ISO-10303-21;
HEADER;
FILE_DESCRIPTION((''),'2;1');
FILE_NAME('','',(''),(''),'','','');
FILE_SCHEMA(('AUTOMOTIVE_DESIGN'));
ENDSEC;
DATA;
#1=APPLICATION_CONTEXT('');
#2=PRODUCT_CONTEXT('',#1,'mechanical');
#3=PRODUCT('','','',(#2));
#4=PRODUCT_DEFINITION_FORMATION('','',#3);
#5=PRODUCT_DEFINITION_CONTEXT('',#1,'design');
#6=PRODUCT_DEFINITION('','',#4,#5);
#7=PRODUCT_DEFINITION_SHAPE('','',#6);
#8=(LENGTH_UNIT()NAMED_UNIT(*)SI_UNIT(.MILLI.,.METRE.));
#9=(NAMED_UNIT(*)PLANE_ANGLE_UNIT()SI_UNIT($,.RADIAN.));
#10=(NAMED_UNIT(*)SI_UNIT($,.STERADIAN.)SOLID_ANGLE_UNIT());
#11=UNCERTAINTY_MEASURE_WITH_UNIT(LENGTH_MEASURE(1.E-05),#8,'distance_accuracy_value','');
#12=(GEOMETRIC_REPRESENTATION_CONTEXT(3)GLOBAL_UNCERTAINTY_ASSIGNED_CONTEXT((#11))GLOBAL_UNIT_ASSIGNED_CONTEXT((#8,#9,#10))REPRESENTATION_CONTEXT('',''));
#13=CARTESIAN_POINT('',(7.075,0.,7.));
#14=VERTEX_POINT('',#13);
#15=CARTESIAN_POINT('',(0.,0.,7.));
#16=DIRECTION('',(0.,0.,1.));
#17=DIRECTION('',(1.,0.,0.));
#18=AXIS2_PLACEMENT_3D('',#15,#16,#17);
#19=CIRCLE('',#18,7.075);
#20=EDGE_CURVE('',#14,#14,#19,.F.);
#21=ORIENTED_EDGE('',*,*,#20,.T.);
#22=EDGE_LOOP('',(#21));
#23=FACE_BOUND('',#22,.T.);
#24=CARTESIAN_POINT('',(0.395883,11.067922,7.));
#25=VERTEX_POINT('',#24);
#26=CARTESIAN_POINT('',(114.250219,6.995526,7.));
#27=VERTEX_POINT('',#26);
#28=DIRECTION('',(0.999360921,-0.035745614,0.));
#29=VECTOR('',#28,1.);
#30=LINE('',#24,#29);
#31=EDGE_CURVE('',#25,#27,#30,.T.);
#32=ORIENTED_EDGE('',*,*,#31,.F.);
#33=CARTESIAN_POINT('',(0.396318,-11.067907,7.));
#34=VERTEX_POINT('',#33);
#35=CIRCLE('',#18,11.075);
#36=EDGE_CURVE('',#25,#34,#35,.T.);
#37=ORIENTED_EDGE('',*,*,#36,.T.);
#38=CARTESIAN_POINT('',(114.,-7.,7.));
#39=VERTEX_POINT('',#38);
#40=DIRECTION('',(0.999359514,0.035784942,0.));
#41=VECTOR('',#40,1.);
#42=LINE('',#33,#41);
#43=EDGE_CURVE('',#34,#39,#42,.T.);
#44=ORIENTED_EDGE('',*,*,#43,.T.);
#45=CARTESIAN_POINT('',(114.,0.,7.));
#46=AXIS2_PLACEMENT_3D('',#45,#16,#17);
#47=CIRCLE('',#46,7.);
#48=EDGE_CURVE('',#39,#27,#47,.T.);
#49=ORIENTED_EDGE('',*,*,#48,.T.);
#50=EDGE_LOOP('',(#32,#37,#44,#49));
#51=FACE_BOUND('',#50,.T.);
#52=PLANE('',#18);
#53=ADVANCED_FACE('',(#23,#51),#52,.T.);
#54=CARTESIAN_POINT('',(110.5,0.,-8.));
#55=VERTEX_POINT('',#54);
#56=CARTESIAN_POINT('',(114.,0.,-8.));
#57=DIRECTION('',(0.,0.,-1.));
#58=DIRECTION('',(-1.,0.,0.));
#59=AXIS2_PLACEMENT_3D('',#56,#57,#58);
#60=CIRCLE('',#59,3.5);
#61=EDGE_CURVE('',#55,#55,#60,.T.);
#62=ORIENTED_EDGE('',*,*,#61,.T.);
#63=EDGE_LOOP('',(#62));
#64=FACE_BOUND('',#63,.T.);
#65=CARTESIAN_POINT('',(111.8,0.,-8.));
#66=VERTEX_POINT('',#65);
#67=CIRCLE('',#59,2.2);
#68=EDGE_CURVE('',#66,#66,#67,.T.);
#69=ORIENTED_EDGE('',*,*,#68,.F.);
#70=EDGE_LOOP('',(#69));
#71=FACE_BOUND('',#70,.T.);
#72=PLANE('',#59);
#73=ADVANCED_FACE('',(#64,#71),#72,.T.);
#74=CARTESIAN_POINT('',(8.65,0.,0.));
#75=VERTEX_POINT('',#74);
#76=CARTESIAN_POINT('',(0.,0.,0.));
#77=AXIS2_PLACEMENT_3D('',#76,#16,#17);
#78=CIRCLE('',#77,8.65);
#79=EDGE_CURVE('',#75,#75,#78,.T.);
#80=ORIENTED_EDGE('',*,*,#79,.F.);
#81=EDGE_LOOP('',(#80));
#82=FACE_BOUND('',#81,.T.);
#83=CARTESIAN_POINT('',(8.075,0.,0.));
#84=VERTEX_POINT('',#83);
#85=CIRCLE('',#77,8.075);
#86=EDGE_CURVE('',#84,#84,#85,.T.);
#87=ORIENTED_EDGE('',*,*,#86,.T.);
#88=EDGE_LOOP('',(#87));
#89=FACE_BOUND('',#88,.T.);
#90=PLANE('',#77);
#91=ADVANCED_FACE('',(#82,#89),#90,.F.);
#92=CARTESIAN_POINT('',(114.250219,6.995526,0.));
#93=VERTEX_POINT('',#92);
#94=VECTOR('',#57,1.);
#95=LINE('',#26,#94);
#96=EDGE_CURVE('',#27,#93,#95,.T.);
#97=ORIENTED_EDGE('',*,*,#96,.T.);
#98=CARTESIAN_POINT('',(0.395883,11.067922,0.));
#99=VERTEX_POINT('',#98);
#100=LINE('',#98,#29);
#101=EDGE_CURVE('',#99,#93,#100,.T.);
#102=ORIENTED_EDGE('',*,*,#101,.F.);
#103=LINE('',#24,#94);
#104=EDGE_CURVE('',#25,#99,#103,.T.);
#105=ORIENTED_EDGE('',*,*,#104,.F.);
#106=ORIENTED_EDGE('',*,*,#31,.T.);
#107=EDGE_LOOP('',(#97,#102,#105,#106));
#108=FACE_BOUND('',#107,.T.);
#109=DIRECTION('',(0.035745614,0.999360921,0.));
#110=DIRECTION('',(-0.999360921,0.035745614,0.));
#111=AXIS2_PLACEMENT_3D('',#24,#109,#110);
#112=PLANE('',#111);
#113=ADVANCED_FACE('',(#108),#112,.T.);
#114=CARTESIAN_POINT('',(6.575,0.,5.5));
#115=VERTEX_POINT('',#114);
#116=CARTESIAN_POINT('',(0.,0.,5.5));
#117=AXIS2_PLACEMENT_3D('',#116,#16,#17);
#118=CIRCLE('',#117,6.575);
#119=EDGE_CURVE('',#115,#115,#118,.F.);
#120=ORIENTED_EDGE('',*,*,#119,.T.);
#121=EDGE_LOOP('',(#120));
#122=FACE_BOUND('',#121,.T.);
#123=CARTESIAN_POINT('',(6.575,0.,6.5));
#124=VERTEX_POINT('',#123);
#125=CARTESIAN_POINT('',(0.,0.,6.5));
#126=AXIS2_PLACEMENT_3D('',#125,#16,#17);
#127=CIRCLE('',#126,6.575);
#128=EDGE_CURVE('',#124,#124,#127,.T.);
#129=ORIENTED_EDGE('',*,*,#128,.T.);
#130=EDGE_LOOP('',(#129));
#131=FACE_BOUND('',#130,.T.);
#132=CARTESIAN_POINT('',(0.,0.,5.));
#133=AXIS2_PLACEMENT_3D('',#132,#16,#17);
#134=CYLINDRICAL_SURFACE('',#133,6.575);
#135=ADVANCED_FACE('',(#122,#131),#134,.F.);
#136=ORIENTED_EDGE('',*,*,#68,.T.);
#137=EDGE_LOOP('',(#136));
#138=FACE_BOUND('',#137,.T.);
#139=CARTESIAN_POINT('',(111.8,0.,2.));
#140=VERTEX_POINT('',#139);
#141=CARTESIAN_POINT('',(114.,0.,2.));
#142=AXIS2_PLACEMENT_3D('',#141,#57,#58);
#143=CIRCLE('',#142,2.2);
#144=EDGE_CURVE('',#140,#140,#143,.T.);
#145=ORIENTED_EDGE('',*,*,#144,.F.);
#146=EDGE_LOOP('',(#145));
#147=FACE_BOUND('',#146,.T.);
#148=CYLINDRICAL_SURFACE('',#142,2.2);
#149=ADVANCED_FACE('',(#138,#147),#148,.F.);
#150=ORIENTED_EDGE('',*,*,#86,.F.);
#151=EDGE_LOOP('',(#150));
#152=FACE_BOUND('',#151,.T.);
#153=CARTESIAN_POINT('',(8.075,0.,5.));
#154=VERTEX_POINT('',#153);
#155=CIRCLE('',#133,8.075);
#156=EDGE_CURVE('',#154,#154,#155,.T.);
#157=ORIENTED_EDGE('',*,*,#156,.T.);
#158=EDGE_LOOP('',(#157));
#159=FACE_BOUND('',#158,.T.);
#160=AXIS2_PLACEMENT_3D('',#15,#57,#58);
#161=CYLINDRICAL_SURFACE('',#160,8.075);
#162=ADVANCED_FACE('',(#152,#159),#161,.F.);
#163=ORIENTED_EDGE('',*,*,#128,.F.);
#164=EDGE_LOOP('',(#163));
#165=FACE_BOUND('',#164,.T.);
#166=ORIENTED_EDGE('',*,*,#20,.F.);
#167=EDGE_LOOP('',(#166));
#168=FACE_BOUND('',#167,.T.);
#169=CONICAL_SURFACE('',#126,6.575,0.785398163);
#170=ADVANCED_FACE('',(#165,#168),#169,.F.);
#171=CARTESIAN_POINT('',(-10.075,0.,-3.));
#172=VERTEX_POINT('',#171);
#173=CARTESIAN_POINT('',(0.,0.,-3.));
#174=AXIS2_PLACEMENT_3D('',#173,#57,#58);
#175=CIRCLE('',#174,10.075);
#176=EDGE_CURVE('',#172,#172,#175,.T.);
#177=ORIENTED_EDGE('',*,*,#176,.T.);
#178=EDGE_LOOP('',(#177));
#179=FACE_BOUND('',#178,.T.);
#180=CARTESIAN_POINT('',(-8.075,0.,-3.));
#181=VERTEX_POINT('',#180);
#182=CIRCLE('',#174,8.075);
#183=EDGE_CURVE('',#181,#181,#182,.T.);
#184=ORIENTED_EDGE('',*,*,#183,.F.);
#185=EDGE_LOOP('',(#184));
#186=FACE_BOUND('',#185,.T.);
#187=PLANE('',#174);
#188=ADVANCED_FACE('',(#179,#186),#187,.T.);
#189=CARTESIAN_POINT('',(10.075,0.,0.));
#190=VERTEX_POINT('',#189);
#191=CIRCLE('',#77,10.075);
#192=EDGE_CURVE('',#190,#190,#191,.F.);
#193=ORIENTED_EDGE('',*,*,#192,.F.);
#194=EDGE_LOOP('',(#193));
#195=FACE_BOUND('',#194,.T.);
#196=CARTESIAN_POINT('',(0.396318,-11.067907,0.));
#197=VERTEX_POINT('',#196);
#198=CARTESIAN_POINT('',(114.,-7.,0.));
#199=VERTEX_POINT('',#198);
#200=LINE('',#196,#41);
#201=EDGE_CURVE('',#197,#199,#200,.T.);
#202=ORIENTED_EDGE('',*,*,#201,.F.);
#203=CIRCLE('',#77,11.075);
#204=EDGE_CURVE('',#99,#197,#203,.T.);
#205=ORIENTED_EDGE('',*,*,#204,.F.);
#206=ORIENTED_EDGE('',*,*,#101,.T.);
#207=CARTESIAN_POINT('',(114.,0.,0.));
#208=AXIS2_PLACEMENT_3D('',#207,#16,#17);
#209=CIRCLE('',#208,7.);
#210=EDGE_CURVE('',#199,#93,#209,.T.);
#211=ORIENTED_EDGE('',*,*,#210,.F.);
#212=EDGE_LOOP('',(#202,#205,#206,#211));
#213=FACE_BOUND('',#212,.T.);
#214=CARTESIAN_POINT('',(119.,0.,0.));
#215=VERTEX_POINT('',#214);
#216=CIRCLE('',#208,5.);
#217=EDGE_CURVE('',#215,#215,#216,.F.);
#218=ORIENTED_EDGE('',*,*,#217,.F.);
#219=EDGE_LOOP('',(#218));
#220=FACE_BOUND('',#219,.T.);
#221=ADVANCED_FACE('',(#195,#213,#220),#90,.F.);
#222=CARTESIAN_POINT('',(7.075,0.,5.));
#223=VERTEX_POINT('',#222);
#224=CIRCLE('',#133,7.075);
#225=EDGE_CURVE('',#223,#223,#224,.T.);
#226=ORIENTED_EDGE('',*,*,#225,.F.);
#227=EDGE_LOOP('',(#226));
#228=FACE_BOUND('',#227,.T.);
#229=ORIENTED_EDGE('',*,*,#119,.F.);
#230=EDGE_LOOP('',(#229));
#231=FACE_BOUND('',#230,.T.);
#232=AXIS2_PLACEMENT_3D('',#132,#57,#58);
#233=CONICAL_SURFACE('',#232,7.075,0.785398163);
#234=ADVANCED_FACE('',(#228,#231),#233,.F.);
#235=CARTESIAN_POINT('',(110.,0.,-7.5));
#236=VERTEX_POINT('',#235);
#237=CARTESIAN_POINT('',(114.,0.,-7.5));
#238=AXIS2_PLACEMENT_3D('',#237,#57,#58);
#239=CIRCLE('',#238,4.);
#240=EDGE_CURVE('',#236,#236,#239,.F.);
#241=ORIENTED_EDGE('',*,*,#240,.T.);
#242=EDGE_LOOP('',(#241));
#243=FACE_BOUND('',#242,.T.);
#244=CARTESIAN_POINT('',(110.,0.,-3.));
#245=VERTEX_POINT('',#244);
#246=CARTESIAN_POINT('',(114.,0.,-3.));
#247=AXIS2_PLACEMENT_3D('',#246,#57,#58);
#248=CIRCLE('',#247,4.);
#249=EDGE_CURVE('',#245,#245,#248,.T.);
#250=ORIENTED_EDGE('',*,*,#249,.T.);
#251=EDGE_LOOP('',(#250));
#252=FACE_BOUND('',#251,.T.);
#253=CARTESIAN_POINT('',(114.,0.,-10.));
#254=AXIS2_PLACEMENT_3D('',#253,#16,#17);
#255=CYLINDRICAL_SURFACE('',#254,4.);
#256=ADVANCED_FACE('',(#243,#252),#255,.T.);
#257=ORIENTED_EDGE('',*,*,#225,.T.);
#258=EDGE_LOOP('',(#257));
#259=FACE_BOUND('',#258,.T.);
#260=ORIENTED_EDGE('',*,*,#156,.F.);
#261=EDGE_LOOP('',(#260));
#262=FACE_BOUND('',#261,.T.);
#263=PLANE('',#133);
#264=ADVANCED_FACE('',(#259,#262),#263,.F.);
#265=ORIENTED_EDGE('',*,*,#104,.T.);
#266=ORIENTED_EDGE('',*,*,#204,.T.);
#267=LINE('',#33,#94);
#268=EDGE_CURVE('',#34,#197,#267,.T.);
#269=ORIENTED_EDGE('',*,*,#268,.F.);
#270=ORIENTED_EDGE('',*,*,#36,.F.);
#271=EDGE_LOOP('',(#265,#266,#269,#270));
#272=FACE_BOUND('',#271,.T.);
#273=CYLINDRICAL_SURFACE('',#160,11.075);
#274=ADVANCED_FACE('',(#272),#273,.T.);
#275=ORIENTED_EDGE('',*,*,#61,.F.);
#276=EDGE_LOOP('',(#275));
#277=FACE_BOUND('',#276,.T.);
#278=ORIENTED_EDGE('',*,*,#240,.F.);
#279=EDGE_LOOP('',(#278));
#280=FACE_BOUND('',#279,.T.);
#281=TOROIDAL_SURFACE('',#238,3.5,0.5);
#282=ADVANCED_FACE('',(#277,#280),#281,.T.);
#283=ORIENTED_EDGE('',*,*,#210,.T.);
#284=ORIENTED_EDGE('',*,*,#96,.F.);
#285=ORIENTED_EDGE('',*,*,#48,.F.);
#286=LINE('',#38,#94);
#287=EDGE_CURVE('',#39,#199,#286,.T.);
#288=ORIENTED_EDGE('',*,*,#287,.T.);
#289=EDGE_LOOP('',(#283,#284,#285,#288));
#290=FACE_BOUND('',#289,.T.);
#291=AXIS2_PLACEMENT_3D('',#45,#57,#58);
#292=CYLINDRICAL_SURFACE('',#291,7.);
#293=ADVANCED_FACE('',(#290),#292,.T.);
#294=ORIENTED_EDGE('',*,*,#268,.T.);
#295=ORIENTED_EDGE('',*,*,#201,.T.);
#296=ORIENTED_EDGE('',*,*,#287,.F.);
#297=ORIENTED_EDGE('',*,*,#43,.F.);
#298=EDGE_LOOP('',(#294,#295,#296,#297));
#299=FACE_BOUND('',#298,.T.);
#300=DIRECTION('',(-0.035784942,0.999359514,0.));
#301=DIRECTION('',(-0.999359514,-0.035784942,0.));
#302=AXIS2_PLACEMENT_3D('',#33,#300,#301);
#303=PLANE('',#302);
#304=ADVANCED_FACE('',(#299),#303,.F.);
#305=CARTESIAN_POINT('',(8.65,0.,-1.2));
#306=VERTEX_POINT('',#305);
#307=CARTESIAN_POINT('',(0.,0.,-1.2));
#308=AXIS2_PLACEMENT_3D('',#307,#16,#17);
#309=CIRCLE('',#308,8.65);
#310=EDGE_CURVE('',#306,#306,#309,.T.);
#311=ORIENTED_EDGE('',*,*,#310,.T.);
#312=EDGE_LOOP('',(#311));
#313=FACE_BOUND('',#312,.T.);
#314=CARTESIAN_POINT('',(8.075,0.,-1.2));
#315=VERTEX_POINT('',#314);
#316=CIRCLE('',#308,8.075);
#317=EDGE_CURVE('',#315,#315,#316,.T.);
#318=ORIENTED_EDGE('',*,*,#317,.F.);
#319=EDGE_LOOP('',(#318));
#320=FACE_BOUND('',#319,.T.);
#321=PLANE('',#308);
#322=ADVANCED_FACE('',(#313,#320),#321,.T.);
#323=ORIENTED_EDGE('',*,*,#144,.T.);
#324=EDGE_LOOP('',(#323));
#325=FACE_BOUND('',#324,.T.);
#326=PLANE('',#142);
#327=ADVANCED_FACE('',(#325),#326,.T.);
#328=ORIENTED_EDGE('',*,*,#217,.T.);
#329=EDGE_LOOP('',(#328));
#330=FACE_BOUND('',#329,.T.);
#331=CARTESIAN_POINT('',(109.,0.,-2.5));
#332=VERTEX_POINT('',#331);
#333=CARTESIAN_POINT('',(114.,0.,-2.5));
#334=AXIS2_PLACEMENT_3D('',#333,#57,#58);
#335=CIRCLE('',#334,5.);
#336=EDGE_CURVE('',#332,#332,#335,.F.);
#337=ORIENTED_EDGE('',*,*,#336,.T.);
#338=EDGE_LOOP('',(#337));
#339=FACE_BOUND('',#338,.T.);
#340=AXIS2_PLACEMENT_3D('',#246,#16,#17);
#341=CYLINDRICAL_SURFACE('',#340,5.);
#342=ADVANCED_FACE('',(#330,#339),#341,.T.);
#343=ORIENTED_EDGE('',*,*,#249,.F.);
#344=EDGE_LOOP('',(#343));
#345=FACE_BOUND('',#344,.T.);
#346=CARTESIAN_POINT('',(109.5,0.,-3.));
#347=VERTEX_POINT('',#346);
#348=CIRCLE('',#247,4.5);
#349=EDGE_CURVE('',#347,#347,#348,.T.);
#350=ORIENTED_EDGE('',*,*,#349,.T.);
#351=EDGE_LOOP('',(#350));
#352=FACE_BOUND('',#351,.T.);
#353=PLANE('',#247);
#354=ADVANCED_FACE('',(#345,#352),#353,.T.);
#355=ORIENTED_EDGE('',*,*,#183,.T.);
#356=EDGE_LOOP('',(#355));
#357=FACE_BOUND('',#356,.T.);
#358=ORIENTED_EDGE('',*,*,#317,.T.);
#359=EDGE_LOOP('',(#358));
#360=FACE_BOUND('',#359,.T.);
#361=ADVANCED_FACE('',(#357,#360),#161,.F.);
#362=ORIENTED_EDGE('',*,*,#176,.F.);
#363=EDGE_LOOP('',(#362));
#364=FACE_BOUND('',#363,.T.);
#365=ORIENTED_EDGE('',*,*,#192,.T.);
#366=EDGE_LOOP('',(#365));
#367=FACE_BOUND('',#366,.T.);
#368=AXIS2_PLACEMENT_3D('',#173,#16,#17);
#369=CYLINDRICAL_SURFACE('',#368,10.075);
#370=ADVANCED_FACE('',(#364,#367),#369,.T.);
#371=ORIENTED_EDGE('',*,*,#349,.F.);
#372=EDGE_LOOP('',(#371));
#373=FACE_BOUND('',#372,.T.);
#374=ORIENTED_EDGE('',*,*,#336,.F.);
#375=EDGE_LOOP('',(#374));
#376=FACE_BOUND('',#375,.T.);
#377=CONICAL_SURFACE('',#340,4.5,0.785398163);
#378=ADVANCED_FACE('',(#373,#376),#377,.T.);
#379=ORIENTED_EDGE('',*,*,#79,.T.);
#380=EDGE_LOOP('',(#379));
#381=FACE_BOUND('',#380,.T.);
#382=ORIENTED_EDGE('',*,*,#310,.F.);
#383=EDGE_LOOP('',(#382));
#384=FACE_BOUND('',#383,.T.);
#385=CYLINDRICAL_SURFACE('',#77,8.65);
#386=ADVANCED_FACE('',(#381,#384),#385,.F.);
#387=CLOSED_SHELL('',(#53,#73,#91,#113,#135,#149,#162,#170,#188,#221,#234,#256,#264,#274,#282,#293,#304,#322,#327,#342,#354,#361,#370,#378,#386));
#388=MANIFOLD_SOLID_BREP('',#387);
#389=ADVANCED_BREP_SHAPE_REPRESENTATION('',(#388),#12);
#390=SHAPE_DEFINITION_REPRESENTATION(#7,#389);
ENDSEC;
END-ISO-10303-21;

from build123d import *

# Parameters (mm, degrees)
SKETCH_1_R          = 8.075
EXTRUDE_1_DEPTH     = 7
EXTRUDE_START       = -2
SKETCH_2_R          = 8.075
SKETCH_2_R_2        = 6.575
EXTRUDE_2_DEPTH     = 2
SKETCH_3_R          = 4
EXTRUDE_3_DEPTH     = 10
SKETCH_4_R          = 5
SKETCH_4_R_2        = 4
EXTRUDE_4_DEPTH     = 3
CHAMFER_1_SIZE      = 0.5
CUT_EXTRUDE_1_DEPTH = 7
CUT_EXTRUDE_2_DEPTH = 5
CUT_EXTRUDE_START   = -2
SKETCH_8_R          = 4
CUT_EXTRUDE_3_DEPTH = 2
FILLET_1_R          = 0.5
SKETCH_9_R          = 2.2
CUT_EXTRUDE_4_DEPTH = 10
EXTRUDE_START_2     = 3
SKETCH_10_R         = 10.075
SKETCH_10_R_2       = 8.075
EXTRUDE_5_DEPTH     = 3
EXTRUDE_6_DEPTH     = 2
EXTRUDE_START_3     = 5
EXTRUDE_7_DEPTH     = 5


with BuildPart() as part:
    # 草图1 → 凸台-拉伸1 (new body)
    with BuildSketch(Plane.XY):
        with BuildLine():
            ThreePointArc((0.395882675, 11.067922204), (-11.074999998, -0.000217919), (0.396318234, -11.067906616))
            Line((0.396318234, -11.067906616), (114, -7))
            ThreePointArc((114, -7), (120.998881523, -0.125129643), (114.250219298, 6.995526449))
            Line((114.250219298, 6.995526449), (0.395882675, 11.067922204))
        make_face()
        Circle(SKETCH_1_R, mode=Mode.SUBTRACT)
    extrude(amount=EXTRUDE_1_DEPTH)

    # 草图2 → 凸台-拉伸2 (add)
    with BuildSketch(Plane.XY.offset(7).offset(EXTRUDE_START)):
        Circle(SKETCH_2_R)
        Circle(SKETCH_2_R_2, mode=Mode.SUBTRACT)
    extrude(amount=EXTRUDE_2_DEPTH)

    # 草图3 → 凸台-拉伸3 (add)
    with BuildSketch(Plane(origin=(0, 0, 0), x_dir=(-1, 0, 0), z_dir=(0, 0, -1))):
        with Locations((-114, 0)):
            Circle(SKETCH_3_R)
    extrude(amount=EXTRUDE_3_DEPTH)

    # 草图4 → 凸台-拉伸4 (add)
    with BuildSketch(Plane(origin=(0, 0, 0), x_dir=(-1, 0, 0), z_dir=(0, 0, -1))):
        with Locations(Location((-114, 0, 0), (0, 0, 180))):
            Circle(SKETCH_4_R)
        with Locations((-114, 0)):
            Circle(SKETCH_4_R_2, mode=Mode.SUBTRACT)
    extrude(amount=EXTRUDE_4_DEPTH)

    # 倒角1
    chamfer_1_edges = [part.edges().sort_by_distance(p)[0] for p in [
        (-6.575, 0, 5),
        (-6.575, 0, 7),
        (118, 0, -10),
        (109, 0, -3),
    ]]
    chamfer(chamfer_1_edges, length=CHAMFER_1_SIZE)

    # 草图5 → 切除-拉伸1 (cut)
    with BuildSketch(Plane(origin=(0, 0, 0), x_dir=(-1, 0, 0), z_dir=(0, 0, -1))):
        with BuildLine():
            ThreePointArc((-12.757234161, -4.640431182), (-13.574999998, 0.000234775), (-12.757073645, 4.640872443))
            Line((-12.757073645, 4.640872443), (-104.114755838, 1.510611753))
            ThreePointArc((-104.114755838, 1.510611753), (-104.028730231, 0.75748214), (-104, 0))
            ThreePointArc((-104, 0), (-104.028593207, -0.755676237), (-104.114209315, -1.507031033))
            Line((-104.114209315, -1.507031033), (-12.757234161, -4.640431182))
        make_face()
    extrude(amount=-CUT_EXTRUDE_1_DEPTH, mode=Mode.SUBTRACT)

    # 草图6 → 切除-拉伸2 (cut)
    with BuildSketch(Plane(origin=(0, 0, 0), x_dir=(-1, 0, 0), z_dir=(0, 0, -1))):
        Polygon((-104.114209315, -1.507031033), (-12.757234161, -4.640431182), (-12.860068961, -7.638668165), (-104.217044114, -4.505268015), align=None)
        Polygon((-12.757073645, 4.640872443), (-104.114755838, 1.510611753), (-104.217486931, 4.508852291), (-12.859804737, 7.63911298), align=None)
    extrude(amount=-CUT_EXTRUDE_2_DEPTH, mode=Mode.SUBTRACT)

    # 草图8 → 切除-拉伸3 (cut)
    with BuildSketch(Plane(origin=(0, 0, -10), x_dir=(-1, 0, 0), z_dir=(0, 0, -1)).offset(CUT_EXTRUDE_START)):
        with Locations((-114, 0)):
            Circle(SKETCH_8_R)
    extrude(amount=CUT_EXTRUDE_3_DEPTH, mode=Mode.SUBTRACT)

    # 圆角1
    fillet_1_edges = [part.edges().sort_by_distance(p)[0] for p in [
        (118, 0, -8),
    ]]
    fillet(fillet_1_edges, radius=FILLET_1_R)

    # 草图9 → 切除-拉伸4 (cut)
    with BuildSketch(Plane(origin=(0, 0, -8), x_dir=(-1, 0, 0), z_dir=(0, 0, -1))):
        with Locations((-114, 0)):
            Circle(SKETCH_9_R)
    extrude(amount=-CUT_EXTRUDE_4_DEPTH, mode=Mode.SUBTRACT)

    # 草图10 → 凸台-拉伸5 (add)
    with BuildSketch(Plane(origin=(0, 0, 0), x_dir=(-1, 0, 0), z_dir=(0, 0, -1)).offset(EXTRUDE_START_2)):
        with Locations(Location((0, 0, 0), (0, 0, 180))):
            Circle(SKETCH_10_R)
        Circle(SKETCH_10_R_2, mode=Mode.SUBTRACT)
    extrude(amount=-EXTRUDE_5_DEPTH)

    # 切除-旋转2: read off the stored shape, not the designer's step
    # 切除-旋转2: loft between two sections, ruled curve by curve
    cut_revolve_2_from = [
        Edge.make_three_point_arc((8.65, 0, -1.2), (0, 8.65, -1.2), (-8.65, 0, -1.2)),
        Edge.make_three_point_arc((-8.65, 0, -1.2), (0, -8.65, -1.2), (8.65, 0, -1.2)),
    ]
    cut_revolve_2_to = [
        Edge.make_three_point_arc((8.65, 0, 0), (0, 8.65, 0), (-8.65, 0, 0)),
        Edge.make_three_point_arc((-8.65, 0, 0), (0, -8.65, 0), (8.65, 0, 0)),
    ]
    cut_revolve_2 = Solid(Shell([*[Face.make_surface_from_curves(cut_revolve_2_from[k], cut_revolve_2_to[k]) for k in range(2)], Face(Wire(cut_revolve_2_from)), Face(Wire(cut_revolve_2_to))]))
    add(cut_revolve_2, mode=Mode.SUBTRACT)

    # 草图12 → 凸台-拉伸6 (add)
    with BuildSketch(Plane.XY.offset(7).offset(EXTRUDE_START)):
        with BuildLine():
            Line((104.114209315, -1.507031033), (12.757234161, -4.640431182))
            ThreePointArc((12.757234161, -4.640431182), (13.574999998, 0.000234775), (12.757073645, 4.640872443))
            Line((12.757073645, 4.640872443), (104.114755838, 1.510611753))
            ThreePointArc((104.114755838, 1.510611753), (104.000000164, 0.001811094), (104.114209315, -1.507031033))
        make_face()
    extrude(amount=EXTRUDE_6_DEPTH)

    # 草图13 → 凸台-拉伸7 (add)
    with BuildSketch(Plane(origin=(0, 0, 5), x_dir=(-1, 0, 0), z_dir=(0, 0, -1)).offset(EXTRUDE_START_3)):
        with BuildLine():
            Line((-104.114209315, -1.507031033), (-104.217044114, -4.505268015))
            Line((-104.217044114, -4.505268015), (-12.860068961, -7.638668165))
            Line((-12.860068961, -7.638668165), (-12.757234161, -4.640431182))
            ThreePointArc((-12.757234161, -4.640431182), (-13.574999998, 0.000234775), (-12.757073645, 4.640872443))
            Line((-12.757073645, 4.640872443), (-12.859804737, 7.63911298))
            Line((-12.859804737, 7.63911298), (-104.217486931, 4.508852291))
            Line((-104.217486931, 4.508852291), (-104.114755838, 1.510611753))
            ThreePointArc((-104.114755838, 1.510611753), (-104.000000164, 0.001811094), (-104.114209315, -1.507031033))
        make_face()
    extrude(amount=-EXTRUDE_7_DEPTH)


solid = part.part
